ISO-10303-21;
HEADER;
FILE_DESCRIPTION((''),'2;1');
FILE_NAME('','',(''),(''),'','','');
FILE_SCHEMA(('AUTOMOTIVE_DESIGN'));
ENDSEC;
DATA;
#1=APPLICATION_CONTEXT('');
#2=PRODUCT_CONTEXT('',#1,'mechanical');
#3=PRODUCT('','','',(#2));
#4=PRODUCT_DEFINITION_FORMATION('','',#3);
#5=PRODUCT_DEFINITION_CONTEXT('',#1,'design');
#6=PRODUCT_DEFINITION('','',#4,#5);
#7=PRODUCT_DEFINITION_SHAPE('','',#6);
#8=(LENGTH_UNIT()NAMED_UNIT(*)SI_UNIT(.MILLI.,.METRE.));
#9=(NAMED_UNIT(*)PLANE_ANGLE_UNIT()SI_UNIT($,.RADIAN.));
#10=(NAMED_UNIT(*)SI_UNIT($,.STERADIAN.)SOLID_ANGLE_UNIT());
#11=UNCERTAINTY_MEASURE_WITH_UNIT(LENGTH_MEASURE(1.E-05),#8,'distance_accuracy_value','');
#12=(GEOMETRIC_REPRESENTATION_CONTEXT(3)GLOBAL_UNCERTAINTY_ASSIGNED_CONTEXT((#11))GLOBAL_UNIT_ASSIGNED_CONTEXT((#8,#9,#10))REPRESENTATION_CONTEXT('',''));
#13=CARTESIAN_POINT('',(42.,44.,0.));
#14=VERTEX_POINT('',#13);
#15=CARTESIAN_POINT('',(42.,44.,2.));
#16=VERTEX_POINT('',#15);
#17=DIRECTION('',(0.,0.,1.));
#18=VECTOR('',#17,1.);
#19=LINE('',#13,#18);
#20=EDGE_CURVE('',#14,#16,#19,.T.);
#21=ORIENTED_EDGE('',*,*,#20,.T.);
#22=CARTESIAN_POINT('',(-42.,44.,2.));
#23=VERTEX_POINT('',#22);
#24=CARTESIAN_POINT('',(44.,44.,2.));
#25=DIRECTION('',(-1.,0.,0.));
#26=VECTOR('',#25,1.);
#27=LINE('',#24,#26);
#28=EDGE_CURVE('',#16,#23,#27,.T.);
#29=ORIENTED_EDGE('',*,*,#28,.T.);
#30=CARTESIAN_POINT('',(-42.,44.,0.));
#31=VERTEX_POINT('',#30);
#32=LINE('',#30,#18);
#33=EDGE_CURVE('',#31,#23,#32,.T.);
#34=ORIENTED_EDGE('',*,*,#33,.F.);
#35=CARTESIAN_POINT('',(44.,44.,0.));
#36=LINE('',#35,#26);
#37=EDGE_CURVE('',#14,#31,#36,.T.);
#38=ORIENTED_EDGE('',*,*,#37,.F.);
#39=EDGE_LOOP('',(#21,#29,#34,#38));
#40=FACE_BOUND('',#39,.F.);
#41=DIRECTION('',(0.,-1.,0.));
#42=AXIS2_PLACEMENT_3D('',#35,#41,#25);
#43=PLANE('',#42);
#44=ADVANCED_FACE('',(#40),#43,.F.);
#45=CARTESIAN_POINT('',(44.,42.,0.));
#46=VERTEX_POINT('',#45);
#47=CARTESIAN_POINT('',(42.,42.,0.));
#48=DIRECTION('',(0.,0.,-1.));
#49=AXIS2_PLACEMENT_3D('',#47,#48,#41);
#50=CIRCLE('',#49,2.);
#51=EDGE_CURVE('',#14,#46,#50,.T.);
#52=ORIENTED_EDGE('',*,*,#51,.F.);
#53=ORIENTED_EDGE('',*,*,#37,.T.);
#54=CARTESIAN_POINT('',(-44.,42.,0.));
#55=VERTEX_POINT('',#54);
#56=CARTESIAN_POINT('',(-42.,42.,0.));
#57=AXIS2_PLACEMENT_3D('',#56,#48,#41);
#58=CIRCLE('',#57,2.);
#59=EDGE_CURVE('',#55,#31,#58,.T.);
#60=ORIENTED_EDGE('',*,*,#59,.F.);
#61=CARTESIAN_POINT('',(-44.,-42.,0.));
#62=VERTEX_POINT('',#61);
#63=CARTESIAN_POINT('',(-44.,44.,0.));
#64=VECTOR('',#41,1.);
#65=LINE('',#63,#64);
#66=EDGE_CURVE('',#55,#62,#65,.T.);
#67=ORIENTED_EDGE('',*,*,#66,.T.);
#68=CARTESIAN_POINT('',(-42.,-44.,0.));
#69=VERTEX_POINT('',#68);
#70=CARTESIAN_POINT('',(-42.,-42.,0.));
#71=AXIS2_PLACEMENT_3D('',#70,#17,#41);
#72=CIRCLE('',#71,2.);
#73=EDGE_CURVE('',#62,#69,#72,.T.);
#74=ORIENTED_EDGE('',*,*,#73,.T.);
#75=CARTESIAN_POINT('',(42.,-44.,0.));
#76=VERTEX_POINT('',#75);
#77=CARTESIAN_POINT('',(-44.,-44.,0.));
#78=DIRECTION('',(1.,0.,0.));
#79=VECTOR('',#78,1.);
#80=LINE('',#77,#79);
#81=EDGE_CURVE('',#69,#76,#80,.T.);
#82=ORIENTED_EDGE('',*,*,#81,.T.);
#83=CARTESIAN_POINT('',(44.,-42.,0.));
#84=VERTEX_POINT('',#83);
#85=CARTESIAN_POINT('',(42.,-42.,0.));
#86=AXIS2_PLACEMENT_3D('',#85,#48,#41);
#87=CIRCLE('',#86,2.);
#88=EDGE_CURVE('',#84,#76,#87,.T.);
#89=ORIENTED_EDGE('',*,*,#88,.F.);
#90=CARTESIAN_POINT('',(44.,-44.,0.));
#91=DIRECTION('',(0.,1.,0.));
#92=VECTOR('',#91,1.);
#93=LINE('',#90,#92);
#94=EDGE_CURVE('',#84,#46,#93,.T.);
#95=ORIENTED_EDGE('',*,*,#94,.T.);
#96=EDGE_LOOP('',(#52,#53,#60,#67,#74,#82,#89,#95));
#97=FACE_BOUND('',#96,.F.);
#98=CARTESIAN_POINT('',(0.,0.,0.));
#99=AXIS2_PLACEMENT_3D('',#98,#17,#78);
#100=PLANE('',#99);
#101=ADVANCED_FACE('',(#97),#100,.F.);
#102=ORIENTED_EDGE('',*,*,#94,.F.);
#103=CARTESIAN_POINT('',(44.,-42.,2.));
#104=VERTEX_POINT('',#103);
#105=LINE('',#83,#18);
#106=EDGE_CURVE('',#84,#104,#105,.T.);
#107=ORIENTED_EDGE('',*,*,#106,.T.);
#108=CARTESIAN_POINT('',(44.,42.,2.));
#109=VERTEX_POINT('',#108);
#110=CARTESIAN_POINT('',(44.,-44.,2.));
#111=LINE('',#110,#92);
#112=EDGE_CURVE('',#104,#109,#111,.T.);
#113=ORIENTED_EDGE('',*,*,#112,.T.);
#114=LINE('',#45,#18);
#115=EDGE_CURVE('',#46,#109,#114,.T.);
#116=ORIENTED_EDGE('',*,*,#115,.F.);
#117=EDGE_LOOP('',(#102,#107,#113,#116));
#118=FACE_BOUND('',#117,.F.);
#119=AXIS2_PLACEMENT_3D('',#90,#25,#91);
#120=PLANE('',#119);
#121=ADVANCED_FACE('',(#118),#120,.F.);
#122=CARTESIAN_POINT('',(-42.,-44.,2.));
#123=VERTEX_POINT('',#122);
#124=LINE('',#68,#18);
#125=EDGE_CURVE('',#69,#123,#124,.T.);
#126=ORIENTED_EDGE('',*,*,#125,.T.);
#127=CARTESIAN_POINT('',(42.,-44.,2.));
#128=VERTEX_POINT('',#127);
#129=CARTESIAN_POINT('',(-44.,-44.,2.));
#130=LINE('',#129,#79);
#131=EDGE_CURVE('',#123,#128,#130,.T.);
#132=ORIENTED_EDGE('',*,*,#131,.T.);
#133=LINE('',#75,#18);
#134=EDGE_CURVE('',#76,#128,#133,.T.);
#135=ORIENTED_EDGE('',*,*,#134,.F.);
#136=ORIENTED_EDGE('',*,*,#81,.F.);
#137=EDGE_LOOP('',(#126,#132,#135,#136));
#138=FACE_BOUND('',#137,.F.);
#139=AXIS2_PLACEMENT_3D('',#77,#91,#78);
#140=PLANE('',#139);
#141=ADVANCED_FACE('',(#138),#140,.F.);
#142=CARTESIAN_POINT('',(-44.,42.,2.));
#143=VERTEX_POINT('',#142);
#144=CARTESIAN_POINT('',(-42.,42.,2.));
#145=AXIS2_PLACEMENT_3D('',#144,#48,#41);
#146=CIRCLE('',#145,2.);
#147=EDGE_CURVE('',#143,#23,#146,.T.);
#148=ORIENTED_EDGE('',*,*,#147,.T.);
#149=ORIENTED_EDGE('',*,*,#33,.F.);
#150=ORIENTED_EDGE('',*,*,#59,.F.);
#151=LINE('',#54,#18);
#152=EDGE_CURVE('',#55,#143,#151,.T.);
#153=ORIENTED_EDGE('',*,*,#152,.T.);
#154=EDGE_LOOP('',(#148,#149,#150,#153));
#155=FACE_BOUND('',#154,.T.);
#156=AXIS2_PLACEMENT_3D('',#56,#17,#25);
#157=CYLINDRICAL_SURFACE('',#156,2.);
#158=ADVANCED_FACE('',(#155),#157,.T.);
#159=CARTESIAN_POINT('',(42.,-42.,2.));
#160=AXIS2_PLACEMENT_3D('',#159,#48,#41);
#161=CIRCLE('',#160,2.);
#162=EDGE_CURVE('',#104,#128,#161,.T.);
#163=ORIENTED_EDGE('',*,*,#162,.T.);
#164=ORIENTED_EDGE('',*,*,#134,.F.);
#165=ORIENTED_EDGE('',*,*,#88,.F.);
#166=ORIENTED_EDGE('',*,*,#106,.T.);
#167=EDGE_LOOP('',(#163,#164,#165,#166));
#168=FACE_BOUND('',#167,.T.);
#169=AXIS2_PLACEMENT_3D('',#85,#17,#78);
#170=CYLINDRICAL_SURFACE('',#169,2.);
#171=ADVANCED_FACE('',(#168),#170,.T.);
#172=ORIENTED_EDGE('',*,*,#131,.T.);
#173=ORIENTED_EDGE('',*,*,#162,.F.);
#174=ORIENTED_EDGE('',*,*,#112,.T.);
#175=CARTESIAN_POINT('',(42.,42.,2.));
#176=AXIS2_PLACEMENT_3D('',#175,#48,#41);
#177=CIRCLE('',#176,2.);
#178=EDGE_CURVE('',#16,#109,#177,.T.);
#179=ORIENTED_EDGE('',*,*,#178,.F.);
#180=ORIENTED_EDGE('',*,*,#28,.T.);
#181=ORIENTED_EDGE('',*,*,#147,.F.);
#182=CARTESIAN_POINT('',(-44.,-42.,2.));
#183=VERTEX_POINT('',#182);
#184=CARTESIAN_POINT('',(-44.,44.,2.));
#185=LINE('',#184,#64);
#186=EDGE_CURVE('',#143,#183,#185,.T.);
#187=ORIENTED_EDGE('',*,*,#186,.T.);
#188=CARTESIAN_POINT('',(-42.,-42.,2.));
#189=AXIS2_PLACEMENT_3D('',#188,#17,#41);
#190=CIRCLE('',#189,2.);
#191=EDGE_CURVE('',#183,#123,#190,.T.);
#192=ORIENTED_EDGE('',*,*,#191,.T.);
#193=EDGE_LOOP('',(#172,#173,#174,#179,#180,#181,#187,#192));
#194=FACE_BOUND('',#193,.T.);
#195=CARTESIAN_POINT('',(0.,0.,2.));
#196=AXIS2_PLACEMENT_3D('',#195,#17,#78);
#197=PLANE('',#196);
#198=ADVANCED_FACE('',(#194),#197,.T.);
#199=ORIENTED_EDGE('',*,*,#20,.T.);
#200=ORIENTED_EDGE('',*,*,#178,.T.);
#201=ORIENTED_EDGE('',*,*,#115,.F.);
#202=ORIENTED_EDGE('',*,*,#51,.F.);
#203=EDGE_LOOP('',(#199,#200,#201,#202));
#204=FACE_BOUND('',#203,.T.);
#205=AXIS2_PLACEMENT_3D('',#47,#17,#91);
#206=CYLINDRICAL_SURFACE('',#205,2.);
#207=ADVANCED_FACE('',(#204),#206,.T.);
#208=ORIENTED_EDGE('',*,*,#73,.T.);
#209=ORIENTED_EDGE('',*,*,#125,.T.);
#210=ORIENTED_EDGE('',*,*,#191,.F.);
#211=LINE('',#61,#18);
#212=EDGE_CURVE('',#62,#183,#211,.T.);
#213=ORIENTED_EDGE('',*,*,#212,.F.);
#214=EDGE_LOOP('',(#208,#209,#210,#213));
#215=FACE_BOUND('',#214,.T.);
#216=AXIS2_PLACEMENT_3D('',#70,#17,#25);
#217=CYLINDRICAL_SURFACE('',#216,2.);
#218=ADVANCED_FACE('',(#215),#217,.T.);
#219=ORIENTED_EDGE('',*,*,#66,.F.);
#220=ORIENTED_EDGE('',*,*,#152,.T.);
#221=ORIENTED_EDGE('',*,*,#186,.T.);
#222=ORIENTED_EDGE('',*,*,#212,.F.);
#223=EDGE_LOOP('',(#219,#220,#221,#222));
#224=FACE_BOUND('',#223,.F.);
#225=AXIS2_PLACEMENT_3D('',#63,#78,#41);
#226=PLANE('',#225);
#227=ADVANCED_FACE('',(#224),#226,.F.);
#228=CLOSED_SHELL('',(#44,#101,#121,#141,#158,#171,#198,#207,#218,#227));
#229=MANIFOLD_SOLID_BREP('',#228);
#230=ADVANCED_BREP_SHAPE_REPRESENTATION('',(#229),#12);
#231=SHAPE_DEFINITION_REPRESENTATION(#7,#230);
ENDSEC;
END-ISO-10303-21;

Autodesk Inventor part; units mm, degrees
ref_plane "YZ Plane" through (0, 0, 0) normal (1, 0, 0) x (0, 1, 0)
ref_plane "XZ Plane" through (0, 0, 0) normal (0, 1, 0) x (-1, 0, 0)
ref_plane "XY Plane" through (0, 0, 0) normal (0, 0, 1) x (1, 0, 0)
sketch "Sketch1" plane through (0, 0, 0) normal (0, 0, 1) x (1, 0, 0)
  line L0 (-44, -44) -> (44, -44)
  line L1 (44, -44) -> (44, 44)
  line L2 (44, 44) -> (-44, 44)
  line L3 (-44, 44) -> (-44, -44)
  line L4 (-44, -44) -> (44, 44) construction
  line L5 (44, -44) -> (-44, 44) construction
  point P0 (0, 0)
  dimension "d154" = 88
  dimension "d155" = 88
extrude "Plate5" add sketch "Sketch1" along normal blind 2
fillet "Corner Round1" radius 2 4 edges at (44, 44, 1) (-44, 44, 1) (-44, -44, 1) (44, -44, 1)
properties part number "PRS 8665 FDS CUP 1_D940" material "Stainless Steel"
